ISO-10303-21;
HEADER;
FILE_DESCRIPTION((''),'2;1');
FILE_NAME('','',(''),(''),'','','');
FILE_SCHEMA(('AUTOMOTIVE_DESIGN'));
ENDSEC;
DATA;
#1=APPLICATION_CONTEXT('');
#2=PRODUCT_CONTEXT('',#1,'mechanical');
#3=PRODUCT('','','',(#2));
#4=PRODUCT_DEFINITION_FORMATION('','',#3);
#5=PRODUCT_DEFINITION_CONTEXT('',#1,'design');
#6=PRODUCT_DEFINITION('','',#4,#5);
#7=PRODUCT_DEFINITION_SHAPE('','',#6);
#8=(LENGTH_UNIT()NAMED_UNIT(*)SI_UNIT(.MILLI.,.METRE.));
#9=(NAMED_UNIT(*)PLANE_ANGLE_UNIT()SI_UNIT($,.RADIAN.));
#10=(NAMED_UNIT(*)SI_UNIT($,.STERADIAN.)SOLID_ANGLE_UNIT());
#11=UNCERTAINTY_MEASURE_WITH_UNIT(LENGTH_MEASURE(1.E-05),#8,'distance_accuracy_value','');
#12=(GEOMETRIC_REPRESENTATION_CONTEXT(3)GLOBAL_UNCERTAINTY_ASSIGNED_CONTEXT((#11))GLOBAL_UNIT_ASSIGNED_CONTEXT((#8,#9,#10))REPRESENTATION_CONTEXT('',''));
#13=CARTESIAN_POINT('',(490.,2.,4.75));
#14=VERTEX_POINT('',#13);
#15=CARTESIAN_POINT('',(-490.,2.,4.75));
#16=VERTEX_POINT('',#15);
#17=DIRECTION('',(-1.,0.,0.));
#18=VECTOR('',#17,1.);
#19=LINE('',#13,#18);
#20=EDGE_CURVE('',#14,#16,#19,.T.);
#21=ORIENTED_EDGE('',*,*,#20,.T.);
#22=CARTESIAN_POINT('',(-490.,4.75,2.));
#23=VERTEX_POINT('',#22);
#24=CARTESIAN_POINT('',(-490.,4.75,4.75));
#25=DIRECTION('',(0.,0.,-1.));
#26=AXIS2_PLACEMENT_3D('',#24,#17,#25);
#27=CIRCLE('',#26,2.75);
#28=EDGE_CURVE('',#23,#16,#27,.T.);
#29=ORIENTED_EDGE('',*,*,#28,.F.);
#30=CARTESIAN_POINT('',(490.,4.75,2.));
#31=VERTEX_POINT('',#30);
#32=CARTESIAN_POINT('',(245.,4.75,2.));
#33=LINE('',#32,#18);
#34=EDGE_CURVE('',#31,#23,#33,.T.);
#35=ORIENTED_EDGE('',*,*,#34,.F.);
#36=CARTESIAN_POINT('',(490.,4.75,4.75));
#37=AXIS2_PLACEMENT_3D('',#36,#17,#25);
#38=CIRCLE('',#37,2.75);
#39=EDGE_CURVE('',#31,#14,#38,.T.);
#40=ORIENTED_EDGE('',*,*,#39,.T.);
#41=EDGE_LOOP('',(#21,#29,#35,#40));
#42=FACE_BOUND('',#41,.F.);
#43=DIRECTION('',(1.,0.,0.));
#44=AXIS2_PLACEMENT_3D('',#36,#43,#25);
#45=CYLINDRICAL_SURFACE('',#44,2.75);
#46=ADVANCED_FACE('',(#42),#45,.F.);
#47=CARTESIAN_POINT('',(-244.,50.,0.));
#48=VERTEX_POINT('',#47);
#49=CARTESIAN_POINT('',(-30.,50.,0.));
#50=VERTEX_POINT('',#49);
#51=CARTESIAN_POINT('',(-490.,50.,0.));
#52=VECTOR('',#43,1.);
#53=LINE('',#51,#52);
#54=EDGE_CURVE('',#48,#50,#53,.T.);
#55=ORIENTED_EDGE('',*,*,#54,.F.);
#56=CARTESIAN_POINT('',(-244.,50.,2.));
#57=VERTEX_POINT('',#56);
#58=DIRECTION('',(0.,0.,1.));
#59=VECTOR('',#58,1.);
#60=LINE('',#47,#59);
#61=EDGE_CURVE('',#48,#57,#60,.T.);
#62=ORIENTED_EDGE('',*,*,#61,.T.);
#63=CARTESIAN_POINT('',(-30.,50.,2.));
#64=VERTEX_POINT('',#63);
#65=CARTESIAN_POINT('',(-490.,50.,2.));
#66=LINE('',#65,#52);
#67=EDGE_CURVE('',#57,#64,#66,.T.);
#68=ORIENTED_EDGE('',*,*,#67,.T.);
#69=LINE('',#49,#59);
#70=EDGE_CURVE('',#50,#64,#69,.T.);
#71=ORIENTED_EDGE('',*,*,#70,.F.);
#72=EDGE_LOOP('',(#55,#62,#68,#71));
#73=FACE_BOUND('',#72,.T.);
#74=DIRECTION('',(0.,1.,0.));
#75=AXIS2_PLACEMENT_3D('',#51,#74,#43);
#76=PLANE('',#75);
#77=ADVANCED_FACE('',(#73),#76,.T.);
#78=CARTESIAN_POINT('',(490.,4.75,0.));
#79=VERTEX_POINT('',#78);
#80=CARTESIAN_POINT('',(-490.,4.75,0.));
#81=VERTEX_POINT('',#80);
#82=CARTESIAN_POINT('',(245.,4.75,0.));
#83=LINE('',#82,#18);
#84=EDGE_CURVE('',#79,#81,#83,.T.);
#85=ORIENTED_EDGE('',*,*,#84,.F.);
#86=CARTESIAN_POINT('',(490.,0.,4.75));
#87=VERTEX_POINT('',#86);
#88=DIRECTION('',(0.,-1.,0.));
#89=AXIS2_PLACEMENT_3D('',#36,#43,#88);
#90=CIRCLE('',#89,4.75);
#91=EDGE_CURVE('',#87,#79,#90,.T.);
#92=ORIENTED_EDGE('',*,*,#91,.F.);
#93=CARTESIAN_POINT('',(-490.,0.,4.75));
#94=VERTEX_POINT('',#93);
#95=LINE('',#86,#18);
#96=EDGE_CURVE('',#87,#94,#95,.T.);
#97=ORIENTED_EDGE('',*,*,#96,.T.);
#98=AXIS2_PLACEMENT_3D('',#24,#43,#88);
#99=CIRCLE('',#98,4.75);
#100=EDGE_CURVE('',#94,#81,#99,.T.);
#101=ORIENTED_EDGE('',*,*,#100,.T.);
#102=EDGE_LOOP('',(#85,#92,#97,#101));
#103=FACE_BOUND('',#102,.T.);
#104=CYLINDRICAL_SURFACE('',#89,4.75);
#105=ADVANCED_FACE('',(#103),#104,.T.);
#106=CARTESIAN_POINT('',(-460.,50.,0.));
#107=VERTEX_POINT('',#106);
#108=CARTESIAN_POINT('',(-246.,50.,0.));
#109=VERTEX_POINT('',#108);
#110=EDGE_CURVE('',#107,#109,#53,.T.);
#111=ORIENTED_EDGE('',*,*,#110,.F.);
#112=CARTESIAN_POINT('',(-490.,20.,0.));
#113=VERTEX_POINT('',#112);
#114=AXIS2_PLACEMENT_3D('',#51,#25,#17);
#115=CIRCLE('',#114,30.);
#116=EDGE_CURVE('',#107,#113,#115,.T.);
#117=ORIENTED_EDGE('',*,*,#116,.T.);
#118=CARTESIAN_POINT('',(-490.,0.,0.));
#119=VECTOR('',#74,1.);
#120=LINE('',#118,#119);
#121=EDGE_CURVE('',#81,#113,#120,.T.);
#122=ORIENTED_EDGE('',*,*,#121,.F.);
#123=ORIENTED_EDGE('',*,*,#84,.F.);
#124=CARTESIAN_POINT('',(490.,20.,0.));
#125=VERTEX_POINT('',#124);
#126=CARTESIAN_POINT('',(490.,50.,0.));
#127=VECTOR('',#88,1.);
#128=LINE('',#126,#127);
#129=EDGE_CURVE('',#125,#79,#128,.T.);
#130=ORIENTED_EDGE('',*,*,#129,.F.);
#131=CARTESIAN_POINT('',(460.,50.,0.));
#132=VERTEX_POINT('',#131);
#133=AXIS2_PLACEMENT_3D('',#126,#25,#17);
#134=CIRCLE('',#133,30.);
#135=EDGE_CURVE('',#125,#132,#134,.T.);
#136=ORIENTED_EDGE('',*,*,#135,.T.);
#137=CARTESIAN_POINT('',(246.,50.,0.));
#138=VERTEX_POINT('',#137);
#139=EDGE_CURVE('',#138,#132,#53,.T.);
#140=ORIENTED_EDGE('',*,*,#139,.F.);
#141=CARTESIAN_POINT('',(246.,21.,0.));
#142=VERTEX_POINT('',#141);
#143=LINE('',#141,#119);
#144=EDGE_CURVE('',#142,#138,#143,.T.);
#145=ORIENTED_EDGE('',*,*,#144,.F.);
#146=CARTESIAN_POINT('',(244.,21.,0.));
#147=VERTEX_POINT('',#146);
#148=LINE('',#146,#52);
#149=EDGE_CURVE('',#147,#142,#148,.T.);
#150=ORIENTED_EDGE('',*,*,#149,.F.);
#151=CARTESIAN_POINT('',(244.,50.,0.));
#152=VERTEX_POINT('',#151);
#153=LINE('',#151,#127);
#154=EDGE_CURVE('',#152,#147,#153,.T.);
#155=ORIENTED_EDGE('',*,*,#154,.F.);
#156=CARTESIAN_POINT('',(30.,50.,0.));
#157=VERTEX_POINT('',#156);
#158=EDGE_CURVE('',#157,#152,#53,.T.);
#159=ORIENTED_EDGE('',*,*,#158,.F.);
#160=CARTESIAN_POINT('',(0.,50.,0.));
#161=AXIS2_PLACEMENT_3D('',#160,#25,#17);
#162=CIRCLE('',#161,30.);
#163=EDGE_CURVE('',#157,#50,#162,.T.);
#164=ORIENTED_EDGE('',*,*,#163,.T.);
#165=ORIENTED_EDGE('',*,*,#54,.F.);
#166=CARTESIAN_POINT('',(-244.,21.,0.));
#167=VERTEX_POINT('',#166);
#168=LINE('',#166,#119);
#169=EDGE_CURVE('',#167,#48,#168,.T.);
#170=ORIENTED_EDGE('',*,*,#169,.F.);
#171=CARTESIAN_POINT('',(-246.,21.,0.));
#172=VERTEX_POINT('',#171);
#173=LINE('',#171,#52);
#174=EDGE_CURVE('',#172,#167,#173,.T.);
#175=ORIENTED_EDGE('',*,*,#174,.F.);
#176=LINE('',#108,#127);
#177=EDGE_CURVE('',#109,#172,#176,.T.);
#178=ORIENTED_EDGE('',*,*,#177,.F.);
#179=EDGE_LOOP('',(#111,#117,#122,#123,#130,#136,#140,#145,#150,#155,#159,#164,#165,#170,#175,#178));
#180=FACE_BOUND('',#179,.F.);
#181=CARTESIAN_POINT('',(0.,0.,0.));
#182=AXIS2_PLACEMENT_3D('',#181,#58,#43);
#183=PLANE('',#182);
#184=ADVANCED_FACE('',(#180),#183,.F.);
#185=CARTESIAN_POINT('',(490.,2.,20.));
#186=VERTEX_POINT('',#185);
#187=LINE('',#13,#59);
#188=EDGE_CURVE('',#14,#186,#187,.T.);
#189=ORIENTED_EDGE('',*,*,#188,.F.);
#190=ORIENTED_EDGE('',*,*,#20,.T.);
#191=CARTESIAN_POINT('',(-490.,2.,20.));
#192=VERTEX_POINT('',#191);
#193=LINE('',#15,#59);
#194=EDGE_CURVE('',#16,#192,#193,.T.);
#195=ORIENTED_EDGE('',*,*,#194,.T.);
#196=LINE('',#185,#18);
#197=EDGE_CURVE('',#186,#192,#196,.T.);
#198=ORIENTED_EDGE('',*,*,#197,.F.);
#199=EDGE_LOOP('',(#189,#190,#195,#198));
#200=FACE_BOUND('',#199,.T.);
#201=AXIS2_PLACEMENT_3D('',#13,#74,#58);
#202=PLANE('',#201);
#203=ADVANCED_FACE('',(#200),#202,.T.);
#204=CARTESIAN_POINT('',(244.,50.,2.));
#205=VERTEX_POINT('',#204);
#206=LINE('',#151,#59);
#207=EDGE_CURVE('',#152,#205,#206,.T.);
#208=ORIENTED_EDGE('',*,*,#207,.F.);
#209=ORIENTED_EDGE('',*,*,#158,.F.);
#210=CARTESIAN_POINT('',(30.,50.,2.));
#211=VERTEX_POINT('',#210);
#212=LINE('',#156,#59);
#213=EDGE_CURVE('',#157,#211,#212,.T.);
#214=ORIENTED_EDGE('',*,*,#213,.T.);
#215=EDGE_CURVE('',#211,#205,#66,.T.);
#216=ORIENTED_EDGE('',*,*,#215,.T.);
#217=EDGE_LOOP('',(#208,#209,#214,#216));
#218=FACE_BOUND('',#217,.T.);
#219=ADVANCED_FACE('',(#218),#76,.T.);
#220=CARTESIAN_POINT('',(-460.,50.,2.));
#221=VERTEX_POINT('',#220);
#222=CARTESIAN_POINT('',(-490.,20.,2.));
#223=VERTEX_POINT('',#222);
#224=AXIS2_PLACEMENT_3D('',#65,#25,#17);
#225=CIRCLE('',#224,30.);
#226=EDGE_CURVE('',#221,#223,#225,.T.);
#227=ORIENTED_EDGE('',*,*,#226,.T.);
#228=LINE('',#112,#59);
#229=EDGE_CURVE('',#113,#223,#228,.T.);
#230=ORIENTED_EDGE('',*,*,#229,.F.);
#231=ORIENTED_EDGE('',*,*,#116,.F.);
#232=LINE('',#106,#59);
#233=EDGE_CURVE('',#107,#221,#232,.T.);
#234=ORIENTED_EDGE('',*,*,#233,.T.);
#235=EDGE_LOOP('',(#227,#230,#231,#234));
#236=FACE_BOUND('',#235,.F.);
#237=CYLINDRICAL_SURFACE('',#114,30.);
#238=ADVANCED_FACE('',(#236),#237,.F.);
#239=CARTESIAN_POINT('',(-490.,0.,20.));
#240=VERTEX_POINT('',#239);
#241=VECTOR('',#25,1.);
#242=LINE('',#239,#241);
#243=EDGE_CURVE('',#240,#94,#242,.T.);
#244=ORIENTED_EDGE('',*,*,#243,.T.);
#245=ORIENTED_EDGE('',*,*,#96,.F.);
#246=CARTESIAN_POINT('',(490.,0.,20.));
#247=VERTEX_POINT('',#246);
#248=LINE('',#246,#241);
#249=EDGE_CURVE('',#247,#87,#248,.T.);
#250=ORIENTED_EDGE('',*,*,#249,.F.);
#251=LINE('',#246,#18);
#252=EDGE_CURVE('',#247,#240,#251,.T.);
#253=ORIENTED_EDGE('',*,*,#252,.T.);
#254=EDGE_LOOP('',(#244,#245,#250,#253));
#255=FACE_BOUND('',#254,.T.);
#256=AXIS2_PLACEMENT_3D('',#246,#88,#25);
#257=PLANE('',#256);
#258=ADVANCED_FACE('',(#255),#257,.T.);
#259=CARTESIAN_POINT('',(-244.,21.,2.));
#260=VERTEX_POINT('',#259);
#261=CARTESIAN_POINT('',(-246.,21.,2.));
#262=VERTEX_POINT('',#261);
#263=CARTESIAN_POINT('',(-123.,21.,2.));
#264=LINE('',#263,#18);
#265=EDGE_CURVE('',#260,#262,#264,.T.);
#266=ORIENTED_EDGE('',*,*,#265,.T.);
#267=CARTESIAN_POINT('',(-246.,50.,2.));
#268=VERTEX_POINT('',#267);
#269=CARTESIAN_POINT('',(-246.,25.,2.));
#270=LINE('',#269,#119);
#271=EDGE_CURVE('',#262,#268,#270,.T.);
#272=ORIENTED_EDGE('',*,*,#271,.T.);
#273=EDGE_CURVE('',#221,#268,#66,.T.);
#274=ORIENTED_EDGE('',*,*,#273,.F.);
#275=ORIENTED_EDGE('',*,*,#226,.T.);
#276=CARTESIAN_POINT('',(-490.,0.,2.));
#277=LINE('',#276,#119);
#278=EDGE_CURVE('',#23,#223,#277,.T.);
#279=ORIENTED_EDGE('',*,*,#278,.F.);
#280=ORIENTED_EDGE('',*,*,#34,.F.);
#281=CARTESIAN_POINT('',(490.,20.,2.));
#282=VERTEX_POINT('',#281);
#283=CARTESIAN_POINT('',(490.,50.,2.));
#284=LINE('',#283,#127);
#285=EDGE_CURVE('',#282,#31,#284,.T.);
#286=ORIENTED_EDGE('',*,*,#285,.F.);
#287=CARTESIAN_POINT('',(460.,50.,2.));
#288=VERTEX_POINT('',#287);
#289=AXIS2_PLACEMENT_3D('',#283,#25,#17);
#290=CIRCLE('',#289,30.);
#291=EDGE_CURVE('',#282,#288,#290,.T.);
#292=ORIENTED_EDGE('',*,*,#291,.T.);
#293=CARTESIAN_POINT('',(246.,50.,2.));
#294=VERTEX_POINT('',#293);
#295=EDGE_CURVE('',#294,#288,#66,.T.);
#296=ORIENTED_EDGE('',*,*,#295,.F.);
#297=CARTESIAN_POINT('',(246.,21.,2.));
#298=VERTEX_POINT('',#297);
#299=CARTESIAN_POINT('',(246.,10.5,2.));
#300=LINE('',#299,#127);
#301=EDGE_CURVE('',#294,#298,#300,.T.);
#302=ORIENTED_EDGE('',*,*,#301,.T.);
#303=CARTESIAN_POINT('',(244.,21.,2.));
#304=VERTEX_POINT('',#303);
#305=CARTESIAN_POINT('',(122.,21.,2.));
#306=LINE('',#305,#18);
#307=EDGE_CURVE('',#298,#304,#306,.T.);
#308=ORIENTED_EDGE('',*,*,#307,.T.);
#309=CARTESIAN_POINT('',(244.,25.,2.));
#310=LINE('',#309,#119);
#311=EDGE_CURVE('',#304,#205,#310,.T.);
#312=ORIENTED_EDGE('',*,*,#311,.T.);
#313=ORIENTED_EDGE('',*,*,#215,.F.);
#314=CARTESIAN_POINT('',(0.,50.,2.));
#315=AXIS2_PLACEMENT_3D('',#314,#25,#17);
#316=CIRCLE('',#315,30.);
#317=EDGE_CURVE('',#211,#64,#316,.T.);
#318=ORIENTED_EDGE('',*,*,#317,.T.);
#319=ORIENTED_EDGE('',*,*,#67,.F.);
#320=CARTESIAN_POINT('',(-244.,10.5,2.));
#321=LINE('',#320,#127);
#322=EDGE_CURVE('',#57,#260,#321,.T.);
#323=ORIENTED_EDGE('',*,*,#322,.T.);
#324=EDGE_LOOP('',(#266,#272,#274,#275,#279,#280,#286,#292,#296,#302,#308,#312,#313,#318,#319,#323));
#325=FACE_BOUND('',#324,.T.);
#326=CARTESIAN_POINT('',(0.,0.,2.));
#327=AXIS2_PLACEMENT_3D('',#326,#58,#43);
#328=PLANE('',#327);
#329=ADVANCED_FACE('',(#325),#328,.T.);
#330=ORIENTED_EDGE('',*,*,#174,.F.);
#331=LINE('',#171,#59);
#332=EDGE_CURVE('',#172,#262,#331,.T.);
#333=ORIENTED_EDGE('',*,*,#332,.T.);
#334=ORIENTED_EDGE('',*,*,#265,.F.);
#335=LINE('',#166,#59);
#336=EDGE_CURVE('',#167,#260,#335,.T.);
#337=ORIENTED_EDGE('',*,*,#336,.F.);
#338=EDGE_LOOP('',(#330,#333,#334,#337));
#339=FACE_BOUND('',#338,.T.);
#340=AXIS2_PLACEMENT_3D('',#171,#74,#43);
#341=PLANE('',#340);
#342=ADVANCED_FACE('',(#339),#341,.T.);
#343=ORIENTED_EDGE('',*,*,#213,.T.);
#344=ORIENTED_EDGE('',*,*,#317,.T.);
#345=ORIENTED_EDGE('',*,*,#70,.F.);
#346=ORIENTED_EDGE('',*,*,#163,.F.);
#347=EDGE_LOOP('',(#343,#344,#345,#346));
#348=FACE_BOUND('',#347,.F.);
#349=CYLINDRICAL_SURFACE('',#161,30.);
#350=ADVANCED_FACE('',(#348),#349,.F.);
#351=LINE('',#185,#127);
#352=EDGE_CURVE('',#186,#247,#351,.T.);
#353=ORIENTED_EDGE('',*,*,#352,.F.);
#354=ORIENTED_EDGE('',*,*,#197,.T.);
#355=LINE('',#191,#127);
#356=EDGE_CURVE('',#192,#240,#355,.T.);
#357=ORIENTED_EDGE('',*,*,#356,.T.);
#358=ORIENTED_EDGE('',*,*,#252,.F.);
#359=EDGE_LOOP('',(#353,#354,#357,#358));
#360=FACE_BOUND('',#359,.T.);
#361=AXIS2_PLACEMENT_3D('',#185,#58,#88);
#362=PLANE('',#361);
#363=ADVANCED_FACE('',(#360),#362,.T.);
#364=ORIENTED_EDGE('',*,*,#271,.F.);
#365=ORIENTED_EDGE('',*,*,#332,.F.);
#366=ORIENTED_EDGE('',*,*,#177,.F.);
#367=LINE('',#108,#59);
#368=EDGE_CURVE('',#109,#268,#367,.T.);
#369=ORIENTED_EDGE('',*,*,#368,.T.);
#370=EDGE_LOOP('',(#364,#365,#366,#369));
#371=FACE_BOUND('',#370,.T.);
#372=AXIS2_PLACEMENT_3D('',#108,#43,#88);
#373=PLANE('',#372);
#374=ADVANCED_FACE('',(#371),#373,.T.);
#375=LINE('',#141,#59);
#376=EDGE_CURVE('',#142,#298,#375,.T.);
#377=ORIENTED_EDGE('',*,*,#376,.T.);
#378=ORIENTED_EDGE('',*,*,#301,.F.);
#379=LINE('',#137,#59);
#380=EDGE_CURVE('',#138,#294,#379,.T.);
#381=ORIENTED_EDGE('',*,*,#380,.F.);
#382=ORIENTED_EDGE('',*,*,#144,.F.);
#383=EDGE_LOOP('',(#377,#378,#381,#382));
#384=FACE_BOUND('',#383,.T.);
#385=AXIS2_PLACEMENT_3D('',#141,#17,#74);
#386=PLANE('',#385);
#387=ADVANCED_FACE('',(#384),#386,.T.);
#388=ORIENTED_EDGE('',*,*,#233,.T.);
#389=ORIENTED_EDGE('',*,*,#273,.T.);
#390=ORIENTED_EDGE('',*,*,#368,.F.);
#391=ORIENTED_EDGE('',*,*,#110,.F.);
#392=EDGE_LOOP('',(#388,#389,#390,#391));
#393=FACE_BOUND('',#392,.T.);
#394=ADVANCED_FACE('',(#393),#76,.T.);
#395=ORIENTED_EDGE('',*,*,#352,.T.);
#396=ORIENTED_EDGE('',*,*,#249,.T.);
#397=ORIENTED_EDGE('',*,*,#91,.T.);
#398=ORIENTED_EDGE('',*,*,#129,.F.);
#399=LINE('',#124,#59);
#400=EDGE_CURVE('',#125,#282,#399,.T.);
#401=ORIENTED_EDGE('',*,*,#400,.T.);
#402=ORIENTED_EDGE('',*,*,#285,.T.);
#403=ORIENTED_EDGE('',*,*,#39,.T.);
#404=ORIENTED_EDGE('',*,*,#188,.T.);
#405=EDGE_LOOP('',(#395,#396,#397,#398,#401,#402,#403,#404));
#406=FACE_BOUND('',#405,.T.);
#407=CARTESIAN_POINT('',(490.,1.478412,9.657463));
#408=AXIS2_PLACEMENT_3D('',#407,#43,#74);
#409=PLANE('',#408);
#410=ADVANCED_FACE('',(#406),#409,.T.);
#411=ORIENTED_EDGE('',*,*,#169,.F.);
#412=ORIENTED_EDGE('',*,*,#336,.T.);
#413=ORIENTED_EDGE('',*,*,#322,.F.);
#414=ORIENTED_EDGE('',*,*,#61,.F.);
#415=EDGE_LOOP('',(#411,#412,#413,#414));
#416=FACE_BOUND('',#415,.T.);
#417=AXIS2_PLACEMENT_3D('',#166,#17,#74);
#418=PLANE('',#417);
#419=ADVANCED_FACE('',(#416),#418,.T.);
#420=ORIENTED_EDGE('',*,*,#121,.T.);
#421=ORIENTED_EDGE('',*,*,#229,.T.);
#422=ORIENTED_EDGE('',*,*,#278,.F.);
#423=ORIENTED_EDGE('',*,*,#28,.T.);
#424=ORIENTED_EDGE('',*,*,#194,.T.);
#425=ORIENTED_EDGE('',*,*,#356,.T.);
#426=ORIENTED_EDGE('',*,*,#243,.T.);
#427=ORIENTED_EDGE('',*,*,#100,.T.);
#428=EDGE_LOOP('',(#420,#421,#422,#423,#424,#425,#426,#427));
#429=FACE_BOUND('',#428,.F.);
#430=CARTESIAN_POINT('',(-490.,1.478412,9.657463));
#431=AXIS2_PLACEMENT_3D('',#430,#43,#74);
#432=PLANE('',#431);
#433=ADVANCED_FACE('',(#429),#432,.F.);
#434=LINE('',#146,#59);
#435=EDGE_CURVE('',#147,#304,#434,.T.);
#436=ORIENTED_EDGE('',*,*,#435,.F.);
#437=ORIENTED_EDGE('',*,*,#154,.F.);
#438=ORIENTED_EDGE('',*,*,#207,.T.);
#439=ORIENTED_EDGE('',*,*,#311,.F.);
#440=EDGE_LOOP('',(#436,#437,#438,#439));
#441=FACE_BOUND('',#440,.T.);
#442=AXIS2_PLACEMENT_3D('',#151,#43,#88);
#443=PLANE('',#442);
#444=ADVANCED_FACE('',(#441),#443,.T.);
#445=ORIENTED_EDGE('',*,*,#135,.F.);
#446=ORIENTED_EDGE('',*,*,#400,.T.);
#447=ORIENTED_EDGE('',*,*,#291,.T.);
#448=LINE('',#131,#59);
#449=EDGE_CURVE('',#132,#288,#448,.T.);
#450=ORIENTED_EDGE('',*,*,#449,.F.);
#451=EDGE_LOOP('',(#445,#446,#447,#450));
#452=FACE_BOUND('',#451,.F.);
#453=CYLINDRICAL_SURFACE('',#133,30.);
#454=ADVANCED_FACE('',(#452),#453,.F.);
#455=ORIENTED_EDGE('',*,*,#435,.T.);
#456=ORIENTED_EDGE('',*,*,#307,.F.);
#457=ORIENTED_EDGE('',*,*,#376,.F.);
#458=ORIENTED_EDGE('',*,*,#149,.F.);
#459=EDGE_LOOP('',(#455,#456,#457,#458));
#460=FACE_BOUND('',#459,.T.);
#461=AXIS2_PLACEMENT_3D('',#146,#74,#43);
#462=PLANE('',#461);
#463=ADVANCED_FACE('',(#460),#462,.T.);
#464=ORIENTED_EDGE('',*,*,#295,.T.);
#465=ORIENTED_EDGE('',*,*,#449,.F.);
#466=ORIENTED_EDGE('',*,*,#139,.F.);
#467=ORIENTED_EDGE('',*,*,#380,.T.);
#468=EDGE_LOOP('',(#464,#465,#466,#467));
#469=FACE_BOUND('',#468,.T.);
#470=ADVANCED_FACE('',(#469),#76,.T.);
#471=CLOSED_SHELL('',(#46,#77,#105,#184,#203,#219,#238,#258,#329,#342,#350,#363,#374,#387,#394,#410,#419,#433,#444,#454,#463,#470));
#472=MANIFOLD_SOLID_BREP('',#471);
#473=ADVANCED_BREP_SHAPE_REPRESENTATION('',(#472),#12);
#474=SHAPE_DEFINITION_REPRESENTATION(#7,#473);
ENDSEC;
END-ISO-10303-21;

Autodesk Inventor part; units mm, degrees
ref_plane "YZ Plane" through (0, 0, 0) normal (1, 0, 0) x (0, 1, 0)
ref_plane "XZ Plane" through (0, 0, 0) normal (0, 1, 0) x (-1, 0, 0)
ref_plane "XY Plane" through (0, 0, 0) normal (0, 0, 1) x (1, 0, 0)
sketch "Sketch1" plane through (0, 0, 0) normal (0, 0, 1) x (1, 0, 0)
  line L0 (-490, 50) -> (490, 50)
  line L1 (490, 50) -> (490, 0)
  line L2 (490, 0) -> (-490, 0)
  line L3 (-490, 0) -> (-490, 50)
  point P0 (0, 0)
  point P1 (0, 0)
  dimension "d0" = 980
  dimension "d1" = 50
extrude "Plate1" add sketch "Sketch1" along normal blind 2
sketch "Sketch2" plane through (490, 2, 0) normal (0, -1, 0) x (1, 0, 0)
  line L0 (-980, 0) -> (0, 0)
  line L1 (0, 0) -> (0, 20)
  line L2 (0, 20) -> (-980, 20)
  line L3 (-980, 20) -> (-980, 0)
edge flange "Flange1" height 20 angle 90 thickness 2 bend radius 2.75 thickness toward (0, -1, 0) relief tear relief width 2 relief depth 1 edges at (0, 0, 2) wall of the first edge with corners at (-490, 2, 0) (490, 2, 0) (490, 2, 20) (-490, 2, 20)
bend "Bend1"
corner "Corner1"
sketch "Sketch5" plane through (0, 0, 0) normal (0, 0, -1) x (-1, 0, 0)
  line L0 (490, 50) -> (-490, 50) projected
  line L1 (490, 0) -> (-490, 0) projected
  circle A0 centre (0, 50) radius 30
  line L2 (-490, 0) -> (-490, 50)
  line L3 (490, 0) -> (490, 50)
  circle A1 centre (-490, 50) radius 30
  circle A2 centre (490, 50) radius 30
  line L4 (-246, 50) -> (-244, 50)
  line L5 (-244, 50) -> (-244, 21)
  line L6 (-244, 21) -> (-246, 21)
  line L7 (-246, 21) -> (-246, 50)
  line L8 (244, 50) -> (246, 50)
  line L9 (246, 50) -> (246, 21)
  line L10 (246, 21) -> (244, 21)
  line L11 (244, 21) -> (244, 50)
  line L12 (0, 50) -> (0, 0) construction
  point P0 (245, 21)
  point P1 (-245, 21)
  point P2 (-490, 20)
  point P3 (-460, 50)
  point P4 (-30, 50)
  point P5 (30, 50)
  point P6 (460, 50)
  point P7 (490, 20)
  point P8 (-244, 50)
  point P9 (246, 50)
  dimension "d33" = 60
  dimension "d34" = 2
  dimension "d35" = 29
  dimension "d36" = 490
extrude "Extrusion1" cut sketch "Sketch5" against normal through all contours L9 L10 L11 L0 | L0 L3 A2 | A0 L0 | L5 L6 L7 L0 | L2 L0 A1 picked at (470.2507, 47.7748) picked at (6.5355, 34.7298) picked at (-470.2507, 47.7748)
sketch "Sketch7" plane through (0, 0, 2) normal (0, 0, 1) x (1, 0, 0)
  line L0 (468.7934, 20.88) -> (468.7934, 8.88) construction
  line L1 (468.7934, 8.88) -> (251.3453, 8.88) construction
  line L2 (251.3453, 8.88) -> (251.3453, 20.88) construction
  line L3 (251.3453, 20.88) -> (468.7934, 20.88) construction
  line L4 (-244, 50) -> (-30, 50) projected
  point P0 (0, 0)
  point P1 (-1, 50)
  point P2 (1, 50)
  dimension "d30" = 12
mark "Mark1"
equation "\"d1\" = Стрингер_7"
equation "\"d2\" = Thickness"
equation "\"d3\" = BendReliefWidth"
equation "\"d4\" = BendReliefDepth"
equation "\"d5\" = MinimumRemnant"
equation "\"d6\" = TransitionRadius"
equation "\"d9\" = BendRadius"
equation "\"d10\" = CornerReliefSize"
equation "\"d11\" = GapSize"
equation "\"d12\" = JacobiRadiusSize"
equation "\"GapSize\" = Thickness"
equation "\"MinimumRemnant\" = 2 * Thickness"
equation "\"BendReliefDepth\" = 0.5 * Thickness"
equation "\"BendReliefWidth\" = Thickness"
equation "\"CornerReliefSize\" = 4 * Thickness"
equation "\"JacobiRadiusSize\" = BendRadius"
equation "\"TransitionRadius\" = BendRadius"
equation "\"Стрингер_7\" = 50"
equation "\"Thickness\" = 2"
equation "\"BendRadius\" = 2.75"
properties part number "MSC 504 STRINGER BOARD BELLY" material "Stainless Steel"
